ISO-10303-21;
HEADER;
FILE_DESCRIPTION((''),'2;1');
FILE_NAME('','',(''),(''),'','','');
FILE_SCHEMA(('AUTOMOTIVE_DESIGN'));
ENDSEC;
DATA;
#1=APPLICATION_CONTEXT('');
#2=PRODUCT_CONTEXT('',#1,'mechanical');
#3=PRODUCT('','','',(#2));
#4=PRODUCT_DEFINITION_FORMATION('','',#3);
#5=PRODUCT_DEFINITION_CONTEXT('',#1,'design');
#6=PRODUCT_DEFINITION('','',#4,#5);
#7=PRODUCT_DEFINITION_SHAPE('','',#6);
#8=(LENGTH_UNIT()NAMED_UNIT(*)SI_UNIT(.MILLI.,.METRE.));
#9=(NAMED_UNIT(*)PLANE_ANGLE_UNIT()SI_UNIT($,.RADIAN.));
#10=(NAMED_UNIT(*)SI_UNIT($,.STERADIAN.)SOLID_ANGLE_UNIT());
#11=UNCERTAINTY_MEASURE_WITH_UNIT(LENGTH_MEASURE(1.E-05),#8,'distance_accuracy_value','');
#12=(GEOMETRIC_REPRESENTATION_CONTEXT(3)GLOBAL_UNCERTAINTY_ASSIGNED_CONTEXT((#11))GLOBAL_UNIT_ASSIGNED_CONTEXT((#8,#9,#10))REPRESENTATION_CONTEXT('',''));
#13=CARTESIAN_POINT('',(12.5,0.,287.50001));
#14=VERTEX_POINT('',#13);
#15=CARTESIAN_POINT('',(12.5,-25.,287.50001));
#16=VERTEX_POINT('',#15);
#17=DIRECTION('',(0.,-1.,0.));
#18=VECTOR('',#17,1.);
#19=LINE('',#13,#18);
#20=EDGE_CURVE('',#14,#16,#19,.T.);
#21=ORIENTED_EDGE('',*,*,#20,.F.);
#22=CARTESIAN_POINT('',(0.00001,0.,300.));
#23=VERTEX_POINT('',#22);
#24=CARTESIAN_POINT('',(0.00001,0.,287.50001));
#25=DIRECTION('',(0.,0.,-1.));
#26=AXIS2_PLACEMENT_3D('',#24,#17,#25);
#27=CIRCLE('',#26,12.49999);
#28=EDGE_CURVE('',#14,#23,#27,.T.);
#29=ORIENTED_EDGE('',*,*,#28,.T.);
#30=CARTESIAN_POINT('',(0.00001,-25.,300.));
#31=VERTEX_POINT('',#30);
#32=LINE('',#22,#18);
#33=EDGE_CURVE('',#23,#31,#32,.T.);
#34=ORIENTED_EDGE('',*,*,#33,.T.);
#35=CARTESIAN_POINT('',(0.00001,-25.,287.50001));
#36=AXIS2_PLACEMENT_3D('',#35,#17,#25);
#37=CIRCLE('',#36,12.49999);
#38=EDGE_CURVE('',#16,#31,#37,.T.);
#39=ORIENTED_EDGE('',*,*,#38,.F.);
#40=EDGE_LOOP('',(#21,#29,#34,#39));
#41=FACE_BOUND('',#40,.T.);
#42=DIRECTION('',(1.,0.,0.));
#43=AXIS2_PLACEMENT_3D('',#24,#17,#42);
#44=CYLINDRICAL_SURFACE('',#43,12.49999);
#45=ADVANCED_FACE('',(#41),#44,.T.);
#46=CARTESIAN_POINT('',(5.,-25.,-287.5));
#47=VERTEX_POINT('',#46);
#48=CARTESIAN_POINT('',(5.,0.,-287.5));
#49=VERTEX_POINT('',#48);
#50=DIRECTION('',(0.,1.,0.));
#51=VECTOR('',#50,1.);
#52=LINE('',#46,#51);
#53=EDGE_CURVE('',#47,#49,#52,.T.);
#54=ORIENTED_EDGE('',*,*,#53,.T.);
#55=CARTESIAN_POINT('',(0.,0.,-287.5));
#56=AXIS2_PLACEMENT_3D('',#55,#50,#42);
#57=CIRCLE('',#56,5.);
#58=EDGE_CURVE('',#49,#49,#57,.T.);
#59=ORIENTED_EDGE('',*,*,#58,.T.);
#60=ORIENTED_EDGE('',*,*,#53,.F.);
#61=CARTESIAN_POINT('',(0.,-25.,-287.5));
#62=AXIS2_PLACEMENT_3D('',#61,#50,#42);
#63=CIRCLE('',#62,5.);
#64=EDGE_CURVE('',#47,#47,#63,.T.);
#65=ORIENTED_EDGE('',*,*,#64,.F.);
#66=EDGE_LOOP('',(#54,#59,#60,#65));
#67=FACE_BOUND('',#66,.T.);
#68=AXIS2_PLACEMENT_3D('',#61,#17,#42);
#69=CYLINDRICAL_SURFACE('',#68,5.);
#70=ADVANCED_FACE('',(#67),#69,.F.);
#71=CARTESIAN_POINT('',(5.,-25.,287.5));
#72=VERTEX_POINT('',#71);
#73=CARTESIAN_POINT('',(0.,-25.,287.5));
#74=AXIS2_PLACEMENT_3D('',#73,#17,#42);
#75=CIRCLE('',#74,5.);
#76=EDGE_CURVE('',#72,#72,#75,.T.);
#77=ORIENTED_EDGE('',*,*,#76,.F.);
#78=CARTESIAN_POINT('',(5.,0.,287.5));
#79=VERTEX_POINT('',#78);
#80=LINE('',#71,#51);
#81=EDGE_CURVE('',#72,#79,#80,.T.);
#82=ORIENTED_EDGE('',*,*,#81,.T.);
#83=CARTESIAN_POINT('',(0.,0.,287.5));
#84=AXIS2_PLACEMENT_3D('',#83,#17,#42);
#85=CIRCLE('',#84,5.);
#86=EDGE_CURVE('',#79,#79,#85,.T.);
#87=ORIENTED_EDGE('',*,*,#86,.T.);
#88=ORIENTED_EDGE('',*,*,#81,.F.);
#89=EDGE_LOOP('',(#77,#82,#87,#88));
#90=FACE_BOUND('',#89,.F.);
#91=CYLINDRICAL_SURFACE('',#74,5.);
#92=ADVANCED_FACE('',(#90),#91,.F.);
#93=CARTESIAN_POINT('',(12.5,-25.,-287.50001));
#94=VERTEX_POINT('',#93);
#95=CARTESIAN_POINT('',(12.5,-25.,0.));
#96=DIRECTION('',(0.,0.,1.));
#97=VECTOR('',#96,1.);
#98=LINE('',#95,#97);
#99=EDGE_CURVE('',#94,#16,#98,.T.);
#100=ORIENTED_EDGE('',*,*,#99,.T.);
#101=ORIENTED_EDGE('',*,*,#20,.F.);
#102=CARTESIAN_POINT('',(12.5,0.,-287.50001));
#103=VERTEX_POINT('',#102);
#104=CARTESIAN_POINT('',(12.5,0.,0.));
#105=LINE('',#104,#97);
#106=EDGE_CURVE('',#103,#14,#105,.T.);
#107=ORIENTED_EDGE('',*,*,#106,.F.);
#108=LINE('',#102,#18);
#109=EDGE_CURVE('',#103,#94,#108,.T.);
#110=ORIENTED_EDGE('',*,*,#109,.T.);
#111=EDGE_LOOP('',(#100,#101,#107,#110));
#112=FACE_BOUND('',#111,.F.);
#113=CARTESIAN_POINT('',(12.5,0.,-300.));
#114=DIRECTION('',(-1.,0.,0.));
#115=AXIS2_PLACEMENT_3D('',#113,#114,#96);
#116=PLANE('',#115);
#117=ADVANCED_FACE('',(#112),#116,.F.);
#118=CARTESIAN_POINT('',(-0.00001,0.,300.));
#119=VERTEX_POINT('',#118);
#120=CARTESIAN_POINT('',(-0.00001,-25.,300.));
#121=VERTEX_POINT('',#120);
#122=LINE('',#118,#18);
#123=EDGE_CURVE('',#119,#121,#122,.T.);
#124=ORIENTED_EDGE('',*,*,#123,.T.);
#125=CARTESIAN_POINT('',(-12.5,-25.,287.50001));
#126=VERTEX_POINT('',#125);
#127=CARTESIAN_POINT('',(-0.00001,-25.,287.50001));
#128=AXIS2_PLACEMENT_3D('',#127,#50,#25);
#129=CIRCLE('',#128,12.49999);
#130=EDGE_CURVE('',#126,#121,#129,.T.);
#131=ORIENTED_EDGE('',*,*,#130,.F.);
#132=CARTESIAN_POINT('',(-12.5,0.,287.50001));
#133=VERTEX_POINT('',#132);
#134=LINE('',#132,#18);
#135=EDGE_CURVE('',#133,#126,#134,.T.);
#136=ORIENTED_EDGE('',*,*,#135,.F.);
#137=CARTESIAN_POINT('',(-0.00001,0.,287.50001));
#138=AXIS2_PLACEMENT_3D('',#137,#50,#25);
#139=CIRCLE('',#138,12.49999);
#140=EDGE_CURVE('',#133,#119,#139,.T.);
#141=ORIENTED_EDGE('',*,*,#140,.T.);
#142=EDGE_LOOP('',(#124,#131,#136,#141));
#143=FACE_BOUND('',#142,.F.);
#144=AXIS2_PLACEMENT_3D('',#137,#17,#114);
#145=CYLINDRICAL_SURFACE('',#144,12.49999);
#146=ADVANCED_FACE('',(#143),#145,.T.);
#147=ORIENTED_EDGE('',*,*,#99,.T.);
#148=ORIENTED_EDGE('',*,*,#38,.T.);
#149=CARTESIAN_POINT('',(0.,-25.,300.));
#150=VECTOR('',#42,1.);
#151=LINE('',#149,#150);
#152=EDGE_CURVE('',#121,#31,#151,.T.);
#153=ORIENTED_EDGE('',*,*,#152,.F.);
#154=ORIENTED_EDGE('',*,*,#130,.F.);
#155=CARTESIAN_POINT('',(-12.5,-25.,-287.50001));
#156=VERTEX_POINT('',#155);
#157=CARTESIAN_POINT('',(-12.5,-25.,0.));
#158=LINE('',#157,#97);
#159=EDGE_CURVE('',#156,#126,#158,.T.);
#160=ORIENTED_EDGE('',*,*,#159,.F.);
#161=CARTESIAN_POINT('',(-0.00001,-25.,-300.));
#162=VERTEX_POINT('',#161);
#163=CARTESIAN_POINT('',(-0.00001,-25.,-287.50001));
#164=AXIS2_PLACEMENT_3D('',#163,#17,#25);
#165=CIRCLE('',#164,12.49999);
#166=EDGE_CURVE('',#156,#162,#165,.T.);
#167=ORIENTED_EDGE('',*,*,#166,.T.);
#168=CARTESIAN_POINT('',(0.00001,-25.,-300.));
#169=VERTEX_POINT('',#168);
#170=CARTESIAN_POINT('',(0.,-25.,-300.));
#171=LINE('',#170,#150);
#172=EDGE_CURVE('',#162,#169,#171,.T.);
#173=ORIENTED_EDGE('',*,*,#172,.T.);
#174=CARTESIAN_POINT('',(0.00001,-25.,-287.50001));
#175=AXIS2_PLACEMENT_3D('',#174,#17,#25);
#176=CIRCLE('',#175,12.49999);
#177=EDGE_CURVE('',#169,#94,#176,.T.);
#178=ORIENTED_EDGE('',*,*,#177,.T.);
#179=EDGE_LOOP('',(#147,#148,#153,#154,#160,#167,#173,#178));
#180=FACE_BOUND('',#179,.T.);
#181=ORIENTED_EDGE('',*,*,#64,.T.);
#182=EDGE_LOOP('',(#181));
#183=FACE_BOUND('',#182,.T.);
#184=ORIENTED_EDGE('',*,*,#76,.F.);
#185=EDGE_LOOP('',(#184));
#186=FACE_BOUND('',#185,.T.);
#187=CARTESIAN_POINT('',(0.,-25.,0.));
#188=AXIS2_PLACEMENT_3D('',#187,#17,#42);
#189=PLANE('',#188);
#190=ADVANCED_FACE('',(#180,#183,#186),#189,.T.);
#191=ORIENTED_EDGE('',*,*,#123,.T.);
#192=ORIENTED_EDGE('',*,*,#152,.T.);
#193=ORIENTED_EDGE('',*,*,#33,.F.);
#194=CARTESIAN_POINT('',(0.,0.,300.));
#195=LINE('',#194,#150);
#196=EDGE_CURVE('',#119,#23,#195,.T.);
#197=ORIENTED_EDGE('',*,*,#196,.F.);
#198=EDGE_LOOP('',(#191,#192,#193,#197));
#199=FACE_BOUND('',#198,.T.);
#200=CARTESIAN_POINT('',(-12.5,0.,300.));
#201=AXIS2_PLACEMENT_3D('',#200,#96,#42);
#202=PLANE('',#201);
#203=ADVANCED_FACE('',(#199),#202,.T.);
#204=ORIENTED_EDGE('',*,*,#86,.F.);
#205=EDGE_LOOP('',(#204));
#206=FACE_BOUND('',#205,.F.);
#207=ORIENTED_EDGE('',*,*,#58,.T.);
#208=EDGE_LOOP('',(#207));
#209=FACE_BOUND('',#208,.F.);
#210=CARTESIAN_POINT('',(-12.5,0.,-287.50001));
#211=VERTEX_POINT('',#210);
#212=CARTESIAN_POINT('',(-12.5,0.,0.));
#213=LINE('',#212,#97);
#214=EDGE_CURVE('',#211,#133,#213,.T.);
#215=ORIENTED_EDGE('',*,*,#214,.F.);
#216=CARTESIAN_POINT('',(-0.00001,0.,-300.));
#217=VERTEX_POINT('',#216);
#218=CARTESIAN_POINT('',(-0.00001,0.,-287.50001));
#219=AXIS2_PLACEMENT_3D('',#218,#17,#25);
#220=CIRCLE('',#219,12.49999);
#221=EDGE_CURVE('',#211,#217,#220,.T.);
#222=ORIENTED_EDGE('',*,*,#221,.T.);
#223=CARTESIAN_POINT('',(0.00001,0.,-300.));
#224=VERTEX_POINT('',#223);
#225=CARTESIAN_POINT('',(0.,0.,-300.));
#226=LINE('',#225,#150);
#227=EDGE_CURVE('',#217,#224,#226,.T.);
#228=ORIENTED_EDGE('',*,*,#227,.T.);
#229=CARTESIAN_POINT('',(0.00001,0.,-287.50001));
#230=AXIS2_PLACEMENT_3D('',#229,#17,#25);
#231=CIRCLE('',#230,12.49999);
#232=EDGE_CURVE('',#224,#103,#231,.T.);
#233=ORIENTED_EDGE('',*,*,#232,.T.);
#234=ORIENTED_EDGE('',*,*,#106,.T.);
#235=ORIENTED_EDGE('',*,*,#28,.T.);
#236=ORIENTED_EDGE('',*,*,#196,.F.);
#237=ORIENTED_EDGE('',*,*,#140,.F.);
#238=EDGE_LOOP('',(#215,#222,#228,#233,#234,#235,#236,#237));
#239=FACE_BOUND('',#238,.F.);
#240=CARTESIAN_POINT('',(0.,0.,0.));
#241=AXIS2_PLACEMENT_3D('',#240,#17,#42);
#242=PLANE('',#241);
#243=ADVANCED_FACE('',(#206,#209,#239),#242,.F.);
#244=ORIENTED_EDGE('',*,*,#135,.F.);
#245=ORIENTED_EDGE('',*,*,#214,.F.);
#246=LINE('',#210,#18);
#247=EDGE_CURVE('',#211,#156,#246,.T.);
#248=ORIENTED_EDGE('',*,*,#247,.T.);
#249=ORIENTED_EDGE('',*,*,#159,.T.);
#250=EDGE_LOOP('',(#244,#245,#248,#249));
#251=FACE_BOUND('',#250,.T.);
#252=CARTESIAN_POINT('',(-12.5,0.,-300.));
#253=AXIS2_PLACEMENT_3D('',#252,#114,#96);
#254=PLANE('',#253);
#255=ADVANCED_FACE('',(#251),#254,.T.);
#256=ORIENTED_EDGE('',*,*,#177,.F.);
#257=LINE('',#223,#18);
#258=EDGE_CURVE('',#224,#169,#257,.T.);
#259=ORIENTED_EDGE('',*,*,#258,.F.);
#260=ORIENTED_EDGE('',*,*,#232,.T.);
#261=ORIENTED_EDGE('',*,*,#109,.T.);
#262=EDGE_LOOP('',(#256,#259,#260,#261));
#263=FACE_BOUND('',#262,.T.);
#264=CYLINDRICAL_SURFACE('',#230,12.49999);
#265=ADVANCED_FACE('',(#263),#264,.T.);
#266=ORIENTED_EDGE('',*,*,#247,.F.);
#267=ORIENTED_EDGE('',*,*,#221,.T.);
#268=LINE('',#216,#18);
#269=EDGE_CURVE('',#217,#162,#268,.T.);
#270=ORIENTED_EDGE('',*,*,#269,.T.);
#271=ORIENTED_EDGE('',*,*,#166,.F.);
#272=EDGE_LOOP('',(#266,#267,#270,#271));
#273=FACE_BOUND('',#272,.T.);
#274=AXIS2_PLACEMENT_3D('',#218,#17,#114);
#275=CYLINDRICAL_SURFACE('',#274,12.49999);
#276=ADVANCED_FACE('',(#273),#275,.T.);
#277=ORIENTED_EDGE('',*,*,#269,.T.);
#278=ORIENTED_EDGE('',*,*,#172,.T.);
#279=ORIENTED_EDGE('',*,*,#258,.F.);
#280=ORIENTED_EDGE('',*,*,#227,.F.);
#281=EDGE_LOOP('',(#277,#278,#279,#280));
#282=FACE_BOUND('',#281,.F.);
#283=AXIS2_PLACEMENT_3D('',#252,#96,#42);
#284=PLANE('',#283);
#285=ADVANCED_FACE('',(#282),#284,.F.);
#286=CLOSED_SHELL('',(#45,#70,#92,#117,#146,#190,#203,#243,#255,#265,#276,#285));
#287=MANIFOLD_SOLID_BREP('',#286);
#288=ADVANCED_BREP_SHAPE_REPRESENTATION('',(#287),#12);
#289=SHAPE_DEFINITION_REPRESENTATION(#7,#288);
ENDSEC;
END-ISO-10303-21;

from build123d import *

# Parameters (mm, degrees)
F0_W     = 25
F0_H     = 600
F1_DEPTH = 25
F2_R     = 12.49999
F3_R     = 12.49999
F4_R     = 5
F5_DEPTH = 25


# Not quite as in the source:
# - a fillet or chamfer is up to 0.001 mm smaller than in the source, because OpenCascade refuses the exact size
# - a pattern or mirror of a feature is missing from the dataset's text; its kind, count and spacing are read off the source's solid


with BuildPart() as f1:
    # F0 (on Front) → F1 (new body)
    with BuildSketch(Plane.XZ):
        Rectangle(F0_W, F0_H)
    extrude(amount=F1_DEPTH)

    # F2 (radius 12.5 in the source; OpenCascade refuses exactly that, so slightly less here)
    f2_edges = [f1.edges().sort_by_distance(p)[0] for p in [
        (-12.5, -12.5, 300),
        (12.5, -12.5, 300),
    ]]
    fillet(f2_edges, radius=F2_R)

    # F3 (radius 12.5 in the source; OpenCascade refuses exactly that, so slightly less here)
    f3_edges = [f1.edges().sort_by_distance(p)[0] for p in [
        (-12.5, -12.5, -300),
        (12.5, -12.5, -300),
    ]]
    fillet(f3_edges, radius=F3_R)

    # F4 (on face) → F5 (cut)
    with BuildSketch(Plane.XZ.offset(25)):
        with Locations((0, 287.5)):
            Circle(F4_R)
    f5 = extrude(amount=-F5_DEPTH, mode=Mode.SUBTRACT)

    # F5_copies: F5 across plane
    add(f5.mirror(Plane(origin=(0, 0, 0), x_dir=(-1, 0, 0), z_dir=(0, 0, -1))), mode=Mode.SUBTRACT)


solid = f1.part
